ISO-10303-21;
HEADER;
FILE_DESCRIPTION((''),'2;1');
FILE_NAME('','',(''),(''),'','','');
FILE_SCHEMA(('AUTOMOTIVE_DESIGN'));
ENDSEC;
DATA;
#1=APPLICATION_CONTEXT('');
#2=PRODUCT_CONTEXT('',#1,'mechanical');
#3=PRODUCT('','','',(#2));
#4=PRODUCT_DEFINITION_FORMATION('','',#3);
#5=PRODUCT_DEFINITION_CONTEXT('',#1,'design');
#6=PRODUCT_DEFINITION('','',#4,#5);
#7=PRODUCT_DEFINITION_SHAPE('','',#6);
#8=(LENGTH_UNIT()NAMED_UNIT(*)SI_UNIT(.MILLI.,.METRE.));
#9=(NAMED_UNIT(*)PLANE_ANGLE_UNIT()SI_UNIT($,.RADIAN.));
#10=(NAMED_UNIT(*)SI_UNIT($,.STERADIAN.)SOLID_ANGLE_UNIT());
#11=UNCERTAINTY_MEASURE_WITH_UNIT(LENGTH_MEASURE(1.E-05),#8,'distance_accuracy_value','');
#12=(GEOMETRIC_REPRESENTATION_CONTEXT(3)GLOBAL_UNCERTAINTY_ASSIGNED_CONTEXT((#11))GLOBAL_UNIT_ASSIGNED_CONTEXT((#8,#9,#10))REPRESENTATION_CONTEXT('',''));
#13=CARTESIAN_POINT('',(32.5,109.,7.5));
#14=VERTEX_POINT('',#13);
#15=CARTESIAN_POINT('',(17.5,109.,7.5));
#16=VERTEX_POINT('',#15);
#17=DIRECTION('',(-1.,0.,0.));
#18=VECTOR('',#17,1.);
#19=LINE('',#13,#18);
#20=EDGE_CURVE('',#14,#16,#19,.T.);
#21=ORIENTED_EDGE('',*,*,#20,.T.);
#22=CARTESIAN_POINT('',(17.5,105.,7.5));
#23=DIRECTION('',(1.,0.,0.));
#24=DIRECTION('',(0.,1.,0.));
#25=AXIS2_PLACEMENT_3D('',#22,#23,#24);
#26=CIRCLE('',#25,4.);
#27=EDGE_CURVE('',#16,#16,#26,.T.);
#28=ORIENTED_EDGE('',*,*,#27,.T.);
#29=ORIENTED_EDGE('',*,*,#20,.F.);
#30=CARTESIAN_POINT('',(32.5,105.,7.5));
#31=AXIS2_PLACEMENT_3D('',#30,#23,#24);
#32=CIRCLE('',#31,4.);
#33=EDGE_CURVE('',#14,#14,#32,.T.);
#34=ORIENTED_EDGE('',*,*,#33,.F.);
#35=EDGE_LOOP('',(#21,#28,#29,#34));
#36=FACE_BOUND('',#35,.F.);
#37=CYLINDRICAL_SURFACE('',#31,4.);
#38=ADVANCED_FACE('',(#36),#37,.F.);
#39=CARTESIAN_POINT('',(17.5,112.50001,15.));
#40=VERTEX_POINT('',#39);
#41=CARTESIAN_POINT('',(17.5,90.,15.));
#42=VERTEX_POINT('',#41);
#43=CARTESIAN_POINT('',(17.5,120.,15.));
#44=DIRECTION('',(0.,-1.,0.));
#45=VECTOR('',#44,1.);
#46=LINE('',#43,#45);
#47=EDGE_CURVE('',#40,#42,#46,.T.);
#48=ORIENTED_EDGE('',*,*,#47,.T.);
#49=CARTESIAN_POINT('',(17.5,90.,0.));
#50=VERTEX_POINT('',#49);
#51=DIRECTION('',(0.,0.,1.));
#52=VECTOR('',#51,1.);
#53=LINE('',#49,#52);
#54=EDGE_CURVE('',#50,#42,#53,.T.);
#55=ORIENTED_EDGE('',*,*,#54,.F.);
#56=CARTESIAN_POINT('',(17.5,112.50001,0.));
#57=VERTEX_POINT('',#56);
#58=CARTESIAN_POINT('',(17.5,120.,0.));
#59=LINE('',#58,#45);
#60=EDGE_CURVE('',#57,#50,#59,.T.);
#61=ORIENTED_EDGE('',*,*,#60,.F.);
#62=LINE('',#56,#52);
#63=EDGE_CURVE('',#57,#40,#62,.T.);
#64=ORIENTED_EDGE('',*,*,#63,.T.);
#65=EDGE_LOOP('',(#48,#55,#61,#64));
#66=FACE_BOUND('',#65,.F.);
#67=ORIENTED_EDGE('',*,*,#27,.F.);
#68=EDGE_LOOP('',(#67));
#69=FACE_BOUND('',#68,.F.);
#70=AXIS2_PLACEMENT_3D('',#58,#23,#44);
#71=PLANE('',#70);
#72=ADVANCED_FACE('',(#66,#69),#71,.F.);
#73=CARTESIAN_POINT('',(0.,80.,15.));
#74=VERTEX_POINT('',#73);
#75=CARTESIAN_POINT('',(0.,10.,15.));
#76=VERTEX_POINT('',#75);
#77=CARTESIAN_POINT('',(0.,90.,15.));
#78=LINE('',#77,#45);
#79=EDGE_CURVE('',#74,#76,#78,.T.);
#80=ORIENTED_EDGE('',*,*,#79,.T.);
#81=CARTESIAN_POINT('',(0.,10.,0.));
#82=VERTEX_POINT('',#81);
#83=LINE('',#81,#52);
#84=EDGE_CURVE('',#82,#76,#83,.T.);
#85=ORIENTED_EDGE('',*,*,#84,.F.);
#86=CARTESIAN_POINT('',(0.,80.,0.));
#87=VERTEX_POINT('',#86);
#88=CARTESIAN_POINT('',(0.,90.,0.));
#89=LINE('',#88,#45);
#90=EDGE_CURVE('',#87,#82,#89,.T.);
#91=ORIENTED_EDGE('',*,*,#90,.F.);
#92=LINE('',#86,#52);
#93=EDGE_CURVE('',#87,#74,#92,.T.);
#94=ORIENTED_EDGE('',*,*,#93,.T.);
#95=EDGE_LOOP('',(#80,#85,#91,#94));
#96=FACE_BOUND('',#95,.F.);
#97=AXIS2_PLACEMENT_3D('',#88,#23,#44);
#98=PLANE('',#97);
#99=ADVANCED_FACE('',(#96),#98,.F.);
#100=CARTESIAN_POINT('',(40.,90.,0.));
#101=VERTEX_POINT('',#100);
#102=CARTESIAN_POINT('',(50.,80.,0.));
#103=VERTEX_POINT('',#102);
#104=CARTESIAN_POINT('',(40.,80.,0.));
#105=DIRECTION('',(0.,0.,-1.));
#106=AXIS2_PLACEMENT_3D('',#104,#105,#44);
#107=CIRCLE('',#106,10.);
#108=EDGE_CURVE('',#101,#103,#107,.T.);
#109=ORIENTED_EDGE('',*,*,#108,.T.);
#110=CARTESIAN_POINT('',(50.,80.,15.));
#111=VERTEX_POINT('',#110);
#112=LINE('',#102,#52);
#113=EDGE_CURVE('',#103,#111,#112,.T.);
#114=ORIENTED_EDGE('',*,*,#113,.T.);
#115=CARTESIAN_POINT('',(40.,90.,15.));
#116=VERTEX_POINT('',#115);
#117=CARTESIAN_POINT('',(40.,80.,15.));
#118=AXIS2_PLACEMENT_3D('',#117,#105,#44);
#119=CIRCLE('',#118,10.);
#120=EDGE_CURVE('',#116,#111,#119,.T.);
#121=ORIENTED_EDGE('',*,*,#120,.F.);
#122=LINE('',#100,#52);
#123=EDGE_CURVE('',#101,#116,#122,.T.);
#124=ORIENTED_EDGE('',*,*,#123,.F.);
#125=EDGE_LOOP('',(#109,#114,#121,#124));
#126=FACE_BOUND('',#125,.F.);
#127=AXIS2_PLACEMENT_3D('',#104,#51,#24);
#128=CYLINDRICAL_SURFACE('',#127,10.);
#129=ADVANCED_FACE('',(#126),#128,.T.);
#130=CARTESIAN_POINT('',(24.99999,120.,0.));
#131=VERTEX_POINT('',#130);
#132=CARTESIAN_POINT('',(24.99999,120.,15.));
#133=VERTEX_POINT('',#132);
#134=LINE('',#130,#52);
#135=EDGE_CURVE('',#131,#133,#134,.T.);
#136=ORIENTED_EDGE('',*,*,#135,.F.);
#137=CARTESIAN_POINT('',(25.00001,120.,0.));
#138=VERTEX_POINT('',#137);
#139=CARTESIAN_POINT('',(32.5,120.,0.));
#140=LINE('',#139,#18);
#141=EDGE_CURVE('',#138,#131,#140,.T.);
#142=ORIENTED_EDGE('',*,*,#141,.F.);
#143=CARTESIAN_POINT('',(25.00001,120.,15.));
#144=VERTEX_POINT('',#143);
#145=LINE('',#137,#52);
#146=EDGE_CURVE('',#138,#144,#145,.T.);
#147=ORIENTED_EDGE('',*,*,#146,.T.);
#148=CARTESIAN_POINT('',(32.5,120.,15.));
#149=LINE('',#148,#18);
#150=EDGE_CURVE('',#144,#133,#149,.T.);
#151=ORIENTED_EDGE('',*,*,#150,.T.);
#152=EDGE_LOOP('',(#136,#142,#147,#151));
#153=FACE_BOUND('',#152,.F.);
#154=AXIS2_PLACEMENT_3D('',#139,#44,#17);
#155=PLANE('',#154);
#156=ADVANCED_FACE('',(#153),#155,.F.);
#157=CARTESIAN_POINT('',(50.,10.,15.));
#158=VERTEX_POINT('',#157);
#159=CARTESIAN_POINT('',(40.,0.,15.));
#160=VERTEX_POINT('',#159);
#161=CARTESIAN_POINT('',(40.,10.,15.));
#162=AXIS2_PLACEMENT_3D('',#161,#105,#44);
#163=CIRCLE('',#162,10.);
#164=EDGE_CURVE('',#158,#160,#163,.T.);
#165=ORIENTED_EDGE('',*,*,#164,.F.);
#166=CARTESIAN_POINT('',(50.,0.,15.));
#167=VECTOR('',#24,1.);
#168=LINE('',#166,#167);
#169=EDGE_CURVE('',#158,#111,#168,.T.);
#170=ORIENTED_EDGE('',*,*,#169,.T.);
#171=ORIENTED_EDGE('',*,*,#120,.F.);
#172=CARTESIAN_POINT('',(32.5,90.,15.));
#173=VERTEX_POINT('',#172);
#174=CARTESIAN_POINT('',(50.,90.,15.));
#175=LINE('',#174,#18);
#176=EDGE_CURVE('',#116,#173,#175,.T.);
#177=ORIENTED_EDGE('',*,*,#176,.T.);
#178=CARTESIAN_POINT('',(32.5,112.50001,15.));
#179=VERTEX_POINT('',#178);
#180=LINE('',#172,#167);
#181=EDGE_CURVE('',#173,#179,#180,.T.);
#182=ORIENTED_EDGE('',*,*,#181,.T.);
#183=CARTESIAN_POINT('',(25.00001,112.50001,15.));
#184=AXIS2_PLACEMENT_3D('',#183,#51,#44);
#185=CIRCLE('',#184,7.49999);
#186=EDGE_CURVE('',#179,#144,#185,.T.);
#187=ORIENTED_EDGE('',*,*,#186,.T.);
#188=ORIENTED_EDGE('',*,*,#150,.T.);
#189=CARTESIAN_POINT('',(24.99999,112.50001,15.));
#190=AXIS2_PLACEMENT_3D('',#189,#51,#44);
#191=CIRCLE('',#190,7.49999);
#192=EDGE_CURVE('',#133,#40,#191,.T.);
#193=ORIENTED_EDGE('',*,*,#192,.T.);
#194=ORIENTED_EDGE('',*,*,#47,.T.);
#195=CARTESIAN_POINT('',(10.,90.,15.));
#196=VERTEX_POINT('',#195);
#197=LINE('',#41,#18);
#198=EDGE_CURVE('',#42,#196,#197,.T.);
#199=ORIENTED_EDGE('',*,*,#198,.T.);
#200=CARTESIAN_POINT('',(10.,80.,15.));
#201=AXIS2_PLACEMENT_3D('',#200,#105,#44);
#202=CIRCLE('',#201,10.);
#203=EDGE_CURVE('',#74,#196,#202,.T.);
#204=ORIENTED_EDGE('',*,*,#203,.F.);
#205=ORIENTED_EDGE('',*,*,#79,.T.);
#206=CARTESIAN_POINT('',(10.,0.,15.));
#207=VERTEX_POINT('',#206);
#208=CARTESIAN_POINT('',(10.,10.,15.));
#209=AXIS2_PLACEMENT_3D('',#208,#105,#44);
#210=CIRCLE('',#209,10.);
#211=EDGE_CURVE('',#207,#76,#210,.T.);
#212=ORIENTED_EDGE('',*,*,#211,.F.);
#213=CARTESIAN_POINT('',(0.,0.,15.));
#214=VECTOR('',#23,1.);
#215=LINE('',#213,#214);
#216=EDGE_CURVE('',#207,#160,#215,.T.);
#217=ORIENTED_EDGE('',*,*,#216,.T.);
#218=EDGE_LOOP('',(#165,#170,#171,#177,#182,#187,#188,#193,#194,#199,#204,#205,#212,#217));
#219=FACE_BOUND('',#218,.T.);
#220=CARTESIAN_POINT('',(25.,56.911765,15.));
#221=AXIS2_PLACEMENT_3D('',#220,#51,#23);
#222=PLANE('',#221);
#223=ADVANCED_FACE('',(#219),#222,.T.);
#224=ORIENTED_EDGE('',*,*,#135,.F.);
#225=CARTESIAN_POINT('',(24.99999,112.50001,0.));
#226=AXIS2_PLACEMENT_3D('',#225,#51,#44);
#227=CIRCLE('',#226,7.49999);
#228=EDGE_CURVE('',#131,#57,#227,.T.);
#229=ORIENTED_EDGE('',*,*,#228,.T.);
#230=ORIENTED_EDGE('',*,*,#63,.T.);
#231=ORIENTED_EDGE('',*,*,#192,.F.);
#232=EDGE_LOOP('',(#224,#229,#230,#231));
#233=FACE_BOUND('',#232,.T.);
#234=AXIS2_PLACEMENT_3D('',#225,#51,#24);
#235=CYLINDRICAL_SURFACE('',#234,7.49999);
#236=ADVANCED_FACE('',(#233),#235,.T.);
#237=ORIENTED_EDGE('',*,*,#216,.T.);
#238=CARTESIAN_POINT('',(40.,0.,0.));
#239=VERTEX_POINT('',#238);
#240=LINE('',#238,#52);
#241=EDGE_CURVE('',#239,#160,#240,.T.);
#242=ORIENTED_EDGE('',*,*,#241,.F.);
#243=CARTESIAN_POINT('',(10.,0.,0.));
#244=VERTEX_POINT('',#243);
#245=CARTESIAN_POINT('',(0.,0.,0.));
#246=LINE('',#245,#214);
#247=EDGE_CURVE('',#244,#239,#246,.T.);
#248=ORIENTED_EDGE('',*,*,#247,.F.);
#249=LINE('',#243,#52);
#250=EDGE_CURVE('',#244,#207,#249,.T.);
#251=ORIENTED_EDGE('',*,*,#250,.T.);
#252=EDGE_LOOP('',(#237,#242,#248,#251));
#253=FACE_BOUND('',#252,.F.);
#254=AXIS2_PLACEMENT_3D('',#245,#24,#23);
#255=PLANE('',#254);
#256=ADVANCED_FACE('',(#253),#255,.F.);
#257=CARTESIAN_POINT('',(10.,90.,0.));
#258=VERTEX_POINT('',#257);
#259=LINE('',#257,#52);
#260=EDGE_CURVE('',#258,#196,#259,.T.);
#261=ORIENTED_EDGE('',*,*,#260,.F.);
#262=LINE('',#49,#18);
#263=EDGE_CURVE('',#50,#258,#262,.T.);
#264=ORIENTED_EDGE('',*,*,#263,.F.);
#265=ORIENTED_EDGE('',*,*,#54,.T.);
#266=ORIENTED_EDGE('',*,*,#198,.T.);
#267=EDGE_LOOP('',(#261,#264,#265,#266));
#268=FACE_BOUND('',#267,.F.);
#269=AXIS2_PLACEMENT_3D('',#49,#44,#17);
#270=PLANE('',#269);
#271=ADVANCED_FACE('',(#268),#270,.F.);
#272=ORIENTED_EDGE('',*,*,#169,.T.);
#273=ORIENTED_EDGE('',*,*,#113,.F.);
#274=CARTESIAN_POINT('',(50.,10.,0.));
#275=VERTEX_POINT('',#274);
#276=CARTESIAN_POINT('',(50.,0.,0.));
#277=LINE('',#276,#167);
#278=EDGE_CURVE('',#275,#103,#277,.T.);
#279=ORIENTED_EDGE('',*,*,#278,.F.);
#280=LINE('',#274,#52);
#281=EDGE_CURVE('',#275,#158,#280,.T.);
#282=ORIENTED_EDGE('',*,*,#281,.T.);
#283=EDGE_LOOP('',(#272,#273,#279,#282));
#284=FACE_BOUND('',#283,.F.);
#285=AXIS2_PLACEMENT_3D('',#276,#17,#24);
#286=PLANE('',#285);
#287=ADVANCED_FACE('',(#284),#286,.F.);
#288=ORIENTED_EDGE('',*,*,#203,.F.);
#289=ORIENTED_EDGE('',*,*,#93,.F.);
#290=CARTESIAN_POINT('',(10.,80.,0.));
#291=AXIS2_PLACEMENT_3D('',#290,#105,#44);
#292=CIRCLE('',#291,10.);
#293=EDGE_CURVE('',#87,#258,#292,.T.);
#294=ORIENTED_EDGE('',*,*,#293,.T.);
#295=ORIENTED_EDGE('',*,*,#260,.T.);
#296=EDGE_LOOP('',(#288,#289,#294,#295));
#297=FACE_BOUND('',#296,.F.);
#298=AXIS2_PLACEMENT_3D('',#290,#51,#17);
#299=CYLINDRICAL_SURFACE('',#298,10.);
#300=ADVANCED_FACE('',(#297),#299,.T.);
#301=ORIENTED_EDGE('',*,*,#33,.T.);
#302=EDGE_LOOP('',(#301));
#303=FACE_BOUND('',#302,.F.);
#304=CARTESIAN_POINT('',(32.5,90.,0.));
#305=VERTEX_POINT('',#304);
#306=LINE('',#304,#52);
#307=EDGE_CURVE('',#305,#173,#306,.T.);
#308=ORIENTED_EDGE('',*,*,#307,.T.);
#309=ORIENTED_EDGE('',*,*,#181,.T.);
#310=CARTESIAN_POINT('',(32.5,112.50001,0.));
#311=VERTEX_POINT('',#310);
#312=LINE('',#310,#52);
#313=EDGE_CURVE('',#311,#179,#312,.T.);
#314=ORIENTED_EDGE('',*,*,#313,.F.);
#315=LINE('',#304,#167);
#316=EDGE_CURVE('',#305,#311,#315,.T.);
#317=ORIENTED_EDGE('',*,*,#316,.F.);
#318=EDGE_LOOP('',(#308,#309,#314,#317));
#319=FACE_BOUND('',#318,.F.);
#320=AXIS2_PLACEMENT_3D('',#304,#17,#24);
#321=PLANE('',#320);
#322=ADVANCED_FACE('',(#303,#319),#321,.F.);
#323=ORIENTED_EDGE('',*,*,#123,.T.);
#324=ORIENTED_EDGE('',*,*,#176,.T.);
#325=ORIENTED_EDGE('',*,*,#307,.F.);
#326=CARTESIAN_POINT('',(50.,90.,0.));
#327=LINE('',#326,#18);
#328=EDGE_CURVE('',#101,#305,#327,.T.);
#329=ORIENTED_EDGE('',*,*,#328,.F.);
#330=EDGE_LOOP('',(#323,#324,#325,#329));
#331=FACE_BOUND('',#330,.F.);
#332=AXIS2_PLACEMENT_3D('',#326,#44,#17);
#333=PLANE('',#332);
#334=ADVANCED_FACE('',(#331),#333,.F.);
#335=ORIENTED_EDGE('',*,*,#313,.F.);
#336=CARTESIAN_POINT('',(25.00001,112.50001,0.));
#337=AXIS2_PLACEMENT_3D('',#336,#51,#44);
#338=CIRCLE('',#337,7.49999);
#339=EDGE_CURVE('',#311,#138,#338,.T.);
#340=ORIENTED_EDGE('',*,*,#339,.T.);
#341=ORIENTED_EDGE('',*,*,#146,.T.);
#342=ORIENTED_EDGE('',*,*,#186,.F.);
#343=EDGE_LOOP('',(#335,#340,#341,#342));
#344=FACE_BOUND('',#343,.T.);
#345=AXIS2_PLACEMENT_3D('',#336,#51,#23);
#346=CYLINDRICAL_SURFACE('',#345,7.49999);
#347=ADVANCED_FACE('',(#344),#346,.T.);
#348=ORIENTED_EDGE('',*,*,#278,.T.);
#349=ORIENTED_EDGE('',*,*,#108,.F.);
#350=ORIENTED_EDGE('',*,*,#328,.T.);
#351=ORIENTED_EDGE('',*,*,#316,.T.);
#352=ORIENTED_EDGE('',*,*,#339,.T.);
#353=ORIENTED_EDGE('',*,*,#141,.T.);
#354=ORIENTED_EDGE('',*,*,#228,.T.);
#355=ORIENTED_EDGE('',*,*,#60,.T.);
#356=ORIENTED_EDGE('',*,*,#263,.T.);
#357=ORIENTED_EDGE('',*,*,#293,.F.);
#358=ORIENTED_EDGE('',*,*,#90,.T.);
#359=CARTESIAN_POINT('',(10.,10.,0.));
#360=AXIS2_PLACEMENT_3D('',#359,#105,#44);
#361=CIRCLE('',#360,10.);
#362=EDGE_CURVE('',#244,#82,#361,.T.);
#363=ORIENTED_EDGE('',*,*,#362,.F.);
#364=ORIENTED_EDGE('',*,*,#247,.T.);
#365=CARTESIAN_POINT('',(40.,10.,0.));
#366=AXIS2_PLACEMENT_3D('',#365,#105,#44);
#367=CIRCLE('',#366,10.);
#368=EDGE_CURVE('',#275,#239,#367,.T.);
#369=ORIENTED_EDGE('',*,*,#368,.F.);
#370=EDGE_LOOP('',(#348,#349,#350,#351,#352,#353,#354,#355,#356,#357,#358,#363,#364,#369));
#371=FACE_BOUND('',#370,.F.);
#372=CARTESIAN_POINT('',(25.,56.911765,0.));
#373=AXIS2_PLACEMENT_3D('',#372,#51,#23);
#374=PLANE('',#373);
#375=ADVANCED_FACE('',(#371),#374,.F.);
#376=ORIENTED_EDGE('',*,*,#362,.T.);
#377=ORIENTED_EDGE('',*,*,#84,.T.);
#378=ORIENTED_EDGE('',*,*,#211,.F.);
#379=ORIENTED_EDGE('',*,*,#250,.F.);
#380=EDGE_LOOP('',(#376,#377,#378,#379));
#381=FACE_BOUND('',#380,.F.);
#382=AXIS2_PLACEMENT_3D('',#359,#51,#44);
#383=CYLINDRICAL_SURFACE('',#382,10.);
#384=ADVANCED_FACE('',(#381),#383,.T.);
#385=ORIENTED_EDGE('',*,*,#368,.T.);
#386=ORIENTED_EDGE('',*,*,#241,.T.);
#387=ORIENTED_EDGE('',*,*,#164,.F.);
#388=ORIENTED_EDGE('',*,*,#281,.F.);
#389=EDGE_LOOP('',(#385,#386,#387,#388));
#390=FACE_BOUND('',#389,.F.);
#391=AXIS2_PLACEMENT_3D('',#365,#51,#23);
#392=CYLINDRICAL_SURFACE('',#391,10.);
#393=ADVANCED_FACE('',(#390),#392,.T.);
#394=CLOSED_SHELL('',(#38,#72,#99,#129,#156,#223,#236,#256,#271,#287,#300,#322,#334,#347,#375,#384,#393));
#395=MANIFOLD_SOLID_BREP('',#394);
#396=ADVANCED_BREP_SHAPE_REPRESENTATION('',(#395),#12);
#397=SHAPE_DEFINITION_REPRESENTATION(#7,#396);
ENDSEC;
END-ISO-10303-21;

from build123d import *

# Parameters (mm, degrees)
F1_DEPTH = 15
F2_R     = 7.49999
F3_R     = 10
F4_R     = 4
F5_DEPTH = 15


# Not quite as in the source:
# - a fillet or chamfer is up to 0.001 mm smaller than in the source, because OpenCascade refuses the exact size


with BuildPart() as f1:
    # F0 (on Top) → F1 (new body)
    with BuildSketch(Plane.XY):
        Polygon((0, 90), (0, 0), (50, 0), (50, 90), (32.5, 90), (32.5, 120), (17.5, 120), (17.5, 90), align=None)
    extrude(amount=F1_DEPTH)

    # F2 (radius 7.5 in the source; OpenCascade refuses exactly that, so slightly less here)
    f2_edges = [f1.edges().sort_by_distance(p)[0] for p in [
        (17.5, 120, 7.5),
        (32.5, 120, 7.5),
    ]]
    fillet(f2_edges, radius=F2_R)

    # F3
    f3_edges = [f1.edges().sort_by_distance(p)[0] for p in [
        (0, 90, 7.5),
        (50, 90, 7.5),
        (50, 0, 7.5),
        (0, 0, 7.5),
    ]]
    fillet(f3_edges, radius=F3_R)

    # F4 (on face) → F5 (cut)
    with BuildSketch(Plane.YZ.offset(32.5)):
        with Locations((105, 7.5)):
            Circle(F4_R)
    extrude(amount=-F5_DEPTH, mode=Mode.SUBTRACT)


solid = f1.part
